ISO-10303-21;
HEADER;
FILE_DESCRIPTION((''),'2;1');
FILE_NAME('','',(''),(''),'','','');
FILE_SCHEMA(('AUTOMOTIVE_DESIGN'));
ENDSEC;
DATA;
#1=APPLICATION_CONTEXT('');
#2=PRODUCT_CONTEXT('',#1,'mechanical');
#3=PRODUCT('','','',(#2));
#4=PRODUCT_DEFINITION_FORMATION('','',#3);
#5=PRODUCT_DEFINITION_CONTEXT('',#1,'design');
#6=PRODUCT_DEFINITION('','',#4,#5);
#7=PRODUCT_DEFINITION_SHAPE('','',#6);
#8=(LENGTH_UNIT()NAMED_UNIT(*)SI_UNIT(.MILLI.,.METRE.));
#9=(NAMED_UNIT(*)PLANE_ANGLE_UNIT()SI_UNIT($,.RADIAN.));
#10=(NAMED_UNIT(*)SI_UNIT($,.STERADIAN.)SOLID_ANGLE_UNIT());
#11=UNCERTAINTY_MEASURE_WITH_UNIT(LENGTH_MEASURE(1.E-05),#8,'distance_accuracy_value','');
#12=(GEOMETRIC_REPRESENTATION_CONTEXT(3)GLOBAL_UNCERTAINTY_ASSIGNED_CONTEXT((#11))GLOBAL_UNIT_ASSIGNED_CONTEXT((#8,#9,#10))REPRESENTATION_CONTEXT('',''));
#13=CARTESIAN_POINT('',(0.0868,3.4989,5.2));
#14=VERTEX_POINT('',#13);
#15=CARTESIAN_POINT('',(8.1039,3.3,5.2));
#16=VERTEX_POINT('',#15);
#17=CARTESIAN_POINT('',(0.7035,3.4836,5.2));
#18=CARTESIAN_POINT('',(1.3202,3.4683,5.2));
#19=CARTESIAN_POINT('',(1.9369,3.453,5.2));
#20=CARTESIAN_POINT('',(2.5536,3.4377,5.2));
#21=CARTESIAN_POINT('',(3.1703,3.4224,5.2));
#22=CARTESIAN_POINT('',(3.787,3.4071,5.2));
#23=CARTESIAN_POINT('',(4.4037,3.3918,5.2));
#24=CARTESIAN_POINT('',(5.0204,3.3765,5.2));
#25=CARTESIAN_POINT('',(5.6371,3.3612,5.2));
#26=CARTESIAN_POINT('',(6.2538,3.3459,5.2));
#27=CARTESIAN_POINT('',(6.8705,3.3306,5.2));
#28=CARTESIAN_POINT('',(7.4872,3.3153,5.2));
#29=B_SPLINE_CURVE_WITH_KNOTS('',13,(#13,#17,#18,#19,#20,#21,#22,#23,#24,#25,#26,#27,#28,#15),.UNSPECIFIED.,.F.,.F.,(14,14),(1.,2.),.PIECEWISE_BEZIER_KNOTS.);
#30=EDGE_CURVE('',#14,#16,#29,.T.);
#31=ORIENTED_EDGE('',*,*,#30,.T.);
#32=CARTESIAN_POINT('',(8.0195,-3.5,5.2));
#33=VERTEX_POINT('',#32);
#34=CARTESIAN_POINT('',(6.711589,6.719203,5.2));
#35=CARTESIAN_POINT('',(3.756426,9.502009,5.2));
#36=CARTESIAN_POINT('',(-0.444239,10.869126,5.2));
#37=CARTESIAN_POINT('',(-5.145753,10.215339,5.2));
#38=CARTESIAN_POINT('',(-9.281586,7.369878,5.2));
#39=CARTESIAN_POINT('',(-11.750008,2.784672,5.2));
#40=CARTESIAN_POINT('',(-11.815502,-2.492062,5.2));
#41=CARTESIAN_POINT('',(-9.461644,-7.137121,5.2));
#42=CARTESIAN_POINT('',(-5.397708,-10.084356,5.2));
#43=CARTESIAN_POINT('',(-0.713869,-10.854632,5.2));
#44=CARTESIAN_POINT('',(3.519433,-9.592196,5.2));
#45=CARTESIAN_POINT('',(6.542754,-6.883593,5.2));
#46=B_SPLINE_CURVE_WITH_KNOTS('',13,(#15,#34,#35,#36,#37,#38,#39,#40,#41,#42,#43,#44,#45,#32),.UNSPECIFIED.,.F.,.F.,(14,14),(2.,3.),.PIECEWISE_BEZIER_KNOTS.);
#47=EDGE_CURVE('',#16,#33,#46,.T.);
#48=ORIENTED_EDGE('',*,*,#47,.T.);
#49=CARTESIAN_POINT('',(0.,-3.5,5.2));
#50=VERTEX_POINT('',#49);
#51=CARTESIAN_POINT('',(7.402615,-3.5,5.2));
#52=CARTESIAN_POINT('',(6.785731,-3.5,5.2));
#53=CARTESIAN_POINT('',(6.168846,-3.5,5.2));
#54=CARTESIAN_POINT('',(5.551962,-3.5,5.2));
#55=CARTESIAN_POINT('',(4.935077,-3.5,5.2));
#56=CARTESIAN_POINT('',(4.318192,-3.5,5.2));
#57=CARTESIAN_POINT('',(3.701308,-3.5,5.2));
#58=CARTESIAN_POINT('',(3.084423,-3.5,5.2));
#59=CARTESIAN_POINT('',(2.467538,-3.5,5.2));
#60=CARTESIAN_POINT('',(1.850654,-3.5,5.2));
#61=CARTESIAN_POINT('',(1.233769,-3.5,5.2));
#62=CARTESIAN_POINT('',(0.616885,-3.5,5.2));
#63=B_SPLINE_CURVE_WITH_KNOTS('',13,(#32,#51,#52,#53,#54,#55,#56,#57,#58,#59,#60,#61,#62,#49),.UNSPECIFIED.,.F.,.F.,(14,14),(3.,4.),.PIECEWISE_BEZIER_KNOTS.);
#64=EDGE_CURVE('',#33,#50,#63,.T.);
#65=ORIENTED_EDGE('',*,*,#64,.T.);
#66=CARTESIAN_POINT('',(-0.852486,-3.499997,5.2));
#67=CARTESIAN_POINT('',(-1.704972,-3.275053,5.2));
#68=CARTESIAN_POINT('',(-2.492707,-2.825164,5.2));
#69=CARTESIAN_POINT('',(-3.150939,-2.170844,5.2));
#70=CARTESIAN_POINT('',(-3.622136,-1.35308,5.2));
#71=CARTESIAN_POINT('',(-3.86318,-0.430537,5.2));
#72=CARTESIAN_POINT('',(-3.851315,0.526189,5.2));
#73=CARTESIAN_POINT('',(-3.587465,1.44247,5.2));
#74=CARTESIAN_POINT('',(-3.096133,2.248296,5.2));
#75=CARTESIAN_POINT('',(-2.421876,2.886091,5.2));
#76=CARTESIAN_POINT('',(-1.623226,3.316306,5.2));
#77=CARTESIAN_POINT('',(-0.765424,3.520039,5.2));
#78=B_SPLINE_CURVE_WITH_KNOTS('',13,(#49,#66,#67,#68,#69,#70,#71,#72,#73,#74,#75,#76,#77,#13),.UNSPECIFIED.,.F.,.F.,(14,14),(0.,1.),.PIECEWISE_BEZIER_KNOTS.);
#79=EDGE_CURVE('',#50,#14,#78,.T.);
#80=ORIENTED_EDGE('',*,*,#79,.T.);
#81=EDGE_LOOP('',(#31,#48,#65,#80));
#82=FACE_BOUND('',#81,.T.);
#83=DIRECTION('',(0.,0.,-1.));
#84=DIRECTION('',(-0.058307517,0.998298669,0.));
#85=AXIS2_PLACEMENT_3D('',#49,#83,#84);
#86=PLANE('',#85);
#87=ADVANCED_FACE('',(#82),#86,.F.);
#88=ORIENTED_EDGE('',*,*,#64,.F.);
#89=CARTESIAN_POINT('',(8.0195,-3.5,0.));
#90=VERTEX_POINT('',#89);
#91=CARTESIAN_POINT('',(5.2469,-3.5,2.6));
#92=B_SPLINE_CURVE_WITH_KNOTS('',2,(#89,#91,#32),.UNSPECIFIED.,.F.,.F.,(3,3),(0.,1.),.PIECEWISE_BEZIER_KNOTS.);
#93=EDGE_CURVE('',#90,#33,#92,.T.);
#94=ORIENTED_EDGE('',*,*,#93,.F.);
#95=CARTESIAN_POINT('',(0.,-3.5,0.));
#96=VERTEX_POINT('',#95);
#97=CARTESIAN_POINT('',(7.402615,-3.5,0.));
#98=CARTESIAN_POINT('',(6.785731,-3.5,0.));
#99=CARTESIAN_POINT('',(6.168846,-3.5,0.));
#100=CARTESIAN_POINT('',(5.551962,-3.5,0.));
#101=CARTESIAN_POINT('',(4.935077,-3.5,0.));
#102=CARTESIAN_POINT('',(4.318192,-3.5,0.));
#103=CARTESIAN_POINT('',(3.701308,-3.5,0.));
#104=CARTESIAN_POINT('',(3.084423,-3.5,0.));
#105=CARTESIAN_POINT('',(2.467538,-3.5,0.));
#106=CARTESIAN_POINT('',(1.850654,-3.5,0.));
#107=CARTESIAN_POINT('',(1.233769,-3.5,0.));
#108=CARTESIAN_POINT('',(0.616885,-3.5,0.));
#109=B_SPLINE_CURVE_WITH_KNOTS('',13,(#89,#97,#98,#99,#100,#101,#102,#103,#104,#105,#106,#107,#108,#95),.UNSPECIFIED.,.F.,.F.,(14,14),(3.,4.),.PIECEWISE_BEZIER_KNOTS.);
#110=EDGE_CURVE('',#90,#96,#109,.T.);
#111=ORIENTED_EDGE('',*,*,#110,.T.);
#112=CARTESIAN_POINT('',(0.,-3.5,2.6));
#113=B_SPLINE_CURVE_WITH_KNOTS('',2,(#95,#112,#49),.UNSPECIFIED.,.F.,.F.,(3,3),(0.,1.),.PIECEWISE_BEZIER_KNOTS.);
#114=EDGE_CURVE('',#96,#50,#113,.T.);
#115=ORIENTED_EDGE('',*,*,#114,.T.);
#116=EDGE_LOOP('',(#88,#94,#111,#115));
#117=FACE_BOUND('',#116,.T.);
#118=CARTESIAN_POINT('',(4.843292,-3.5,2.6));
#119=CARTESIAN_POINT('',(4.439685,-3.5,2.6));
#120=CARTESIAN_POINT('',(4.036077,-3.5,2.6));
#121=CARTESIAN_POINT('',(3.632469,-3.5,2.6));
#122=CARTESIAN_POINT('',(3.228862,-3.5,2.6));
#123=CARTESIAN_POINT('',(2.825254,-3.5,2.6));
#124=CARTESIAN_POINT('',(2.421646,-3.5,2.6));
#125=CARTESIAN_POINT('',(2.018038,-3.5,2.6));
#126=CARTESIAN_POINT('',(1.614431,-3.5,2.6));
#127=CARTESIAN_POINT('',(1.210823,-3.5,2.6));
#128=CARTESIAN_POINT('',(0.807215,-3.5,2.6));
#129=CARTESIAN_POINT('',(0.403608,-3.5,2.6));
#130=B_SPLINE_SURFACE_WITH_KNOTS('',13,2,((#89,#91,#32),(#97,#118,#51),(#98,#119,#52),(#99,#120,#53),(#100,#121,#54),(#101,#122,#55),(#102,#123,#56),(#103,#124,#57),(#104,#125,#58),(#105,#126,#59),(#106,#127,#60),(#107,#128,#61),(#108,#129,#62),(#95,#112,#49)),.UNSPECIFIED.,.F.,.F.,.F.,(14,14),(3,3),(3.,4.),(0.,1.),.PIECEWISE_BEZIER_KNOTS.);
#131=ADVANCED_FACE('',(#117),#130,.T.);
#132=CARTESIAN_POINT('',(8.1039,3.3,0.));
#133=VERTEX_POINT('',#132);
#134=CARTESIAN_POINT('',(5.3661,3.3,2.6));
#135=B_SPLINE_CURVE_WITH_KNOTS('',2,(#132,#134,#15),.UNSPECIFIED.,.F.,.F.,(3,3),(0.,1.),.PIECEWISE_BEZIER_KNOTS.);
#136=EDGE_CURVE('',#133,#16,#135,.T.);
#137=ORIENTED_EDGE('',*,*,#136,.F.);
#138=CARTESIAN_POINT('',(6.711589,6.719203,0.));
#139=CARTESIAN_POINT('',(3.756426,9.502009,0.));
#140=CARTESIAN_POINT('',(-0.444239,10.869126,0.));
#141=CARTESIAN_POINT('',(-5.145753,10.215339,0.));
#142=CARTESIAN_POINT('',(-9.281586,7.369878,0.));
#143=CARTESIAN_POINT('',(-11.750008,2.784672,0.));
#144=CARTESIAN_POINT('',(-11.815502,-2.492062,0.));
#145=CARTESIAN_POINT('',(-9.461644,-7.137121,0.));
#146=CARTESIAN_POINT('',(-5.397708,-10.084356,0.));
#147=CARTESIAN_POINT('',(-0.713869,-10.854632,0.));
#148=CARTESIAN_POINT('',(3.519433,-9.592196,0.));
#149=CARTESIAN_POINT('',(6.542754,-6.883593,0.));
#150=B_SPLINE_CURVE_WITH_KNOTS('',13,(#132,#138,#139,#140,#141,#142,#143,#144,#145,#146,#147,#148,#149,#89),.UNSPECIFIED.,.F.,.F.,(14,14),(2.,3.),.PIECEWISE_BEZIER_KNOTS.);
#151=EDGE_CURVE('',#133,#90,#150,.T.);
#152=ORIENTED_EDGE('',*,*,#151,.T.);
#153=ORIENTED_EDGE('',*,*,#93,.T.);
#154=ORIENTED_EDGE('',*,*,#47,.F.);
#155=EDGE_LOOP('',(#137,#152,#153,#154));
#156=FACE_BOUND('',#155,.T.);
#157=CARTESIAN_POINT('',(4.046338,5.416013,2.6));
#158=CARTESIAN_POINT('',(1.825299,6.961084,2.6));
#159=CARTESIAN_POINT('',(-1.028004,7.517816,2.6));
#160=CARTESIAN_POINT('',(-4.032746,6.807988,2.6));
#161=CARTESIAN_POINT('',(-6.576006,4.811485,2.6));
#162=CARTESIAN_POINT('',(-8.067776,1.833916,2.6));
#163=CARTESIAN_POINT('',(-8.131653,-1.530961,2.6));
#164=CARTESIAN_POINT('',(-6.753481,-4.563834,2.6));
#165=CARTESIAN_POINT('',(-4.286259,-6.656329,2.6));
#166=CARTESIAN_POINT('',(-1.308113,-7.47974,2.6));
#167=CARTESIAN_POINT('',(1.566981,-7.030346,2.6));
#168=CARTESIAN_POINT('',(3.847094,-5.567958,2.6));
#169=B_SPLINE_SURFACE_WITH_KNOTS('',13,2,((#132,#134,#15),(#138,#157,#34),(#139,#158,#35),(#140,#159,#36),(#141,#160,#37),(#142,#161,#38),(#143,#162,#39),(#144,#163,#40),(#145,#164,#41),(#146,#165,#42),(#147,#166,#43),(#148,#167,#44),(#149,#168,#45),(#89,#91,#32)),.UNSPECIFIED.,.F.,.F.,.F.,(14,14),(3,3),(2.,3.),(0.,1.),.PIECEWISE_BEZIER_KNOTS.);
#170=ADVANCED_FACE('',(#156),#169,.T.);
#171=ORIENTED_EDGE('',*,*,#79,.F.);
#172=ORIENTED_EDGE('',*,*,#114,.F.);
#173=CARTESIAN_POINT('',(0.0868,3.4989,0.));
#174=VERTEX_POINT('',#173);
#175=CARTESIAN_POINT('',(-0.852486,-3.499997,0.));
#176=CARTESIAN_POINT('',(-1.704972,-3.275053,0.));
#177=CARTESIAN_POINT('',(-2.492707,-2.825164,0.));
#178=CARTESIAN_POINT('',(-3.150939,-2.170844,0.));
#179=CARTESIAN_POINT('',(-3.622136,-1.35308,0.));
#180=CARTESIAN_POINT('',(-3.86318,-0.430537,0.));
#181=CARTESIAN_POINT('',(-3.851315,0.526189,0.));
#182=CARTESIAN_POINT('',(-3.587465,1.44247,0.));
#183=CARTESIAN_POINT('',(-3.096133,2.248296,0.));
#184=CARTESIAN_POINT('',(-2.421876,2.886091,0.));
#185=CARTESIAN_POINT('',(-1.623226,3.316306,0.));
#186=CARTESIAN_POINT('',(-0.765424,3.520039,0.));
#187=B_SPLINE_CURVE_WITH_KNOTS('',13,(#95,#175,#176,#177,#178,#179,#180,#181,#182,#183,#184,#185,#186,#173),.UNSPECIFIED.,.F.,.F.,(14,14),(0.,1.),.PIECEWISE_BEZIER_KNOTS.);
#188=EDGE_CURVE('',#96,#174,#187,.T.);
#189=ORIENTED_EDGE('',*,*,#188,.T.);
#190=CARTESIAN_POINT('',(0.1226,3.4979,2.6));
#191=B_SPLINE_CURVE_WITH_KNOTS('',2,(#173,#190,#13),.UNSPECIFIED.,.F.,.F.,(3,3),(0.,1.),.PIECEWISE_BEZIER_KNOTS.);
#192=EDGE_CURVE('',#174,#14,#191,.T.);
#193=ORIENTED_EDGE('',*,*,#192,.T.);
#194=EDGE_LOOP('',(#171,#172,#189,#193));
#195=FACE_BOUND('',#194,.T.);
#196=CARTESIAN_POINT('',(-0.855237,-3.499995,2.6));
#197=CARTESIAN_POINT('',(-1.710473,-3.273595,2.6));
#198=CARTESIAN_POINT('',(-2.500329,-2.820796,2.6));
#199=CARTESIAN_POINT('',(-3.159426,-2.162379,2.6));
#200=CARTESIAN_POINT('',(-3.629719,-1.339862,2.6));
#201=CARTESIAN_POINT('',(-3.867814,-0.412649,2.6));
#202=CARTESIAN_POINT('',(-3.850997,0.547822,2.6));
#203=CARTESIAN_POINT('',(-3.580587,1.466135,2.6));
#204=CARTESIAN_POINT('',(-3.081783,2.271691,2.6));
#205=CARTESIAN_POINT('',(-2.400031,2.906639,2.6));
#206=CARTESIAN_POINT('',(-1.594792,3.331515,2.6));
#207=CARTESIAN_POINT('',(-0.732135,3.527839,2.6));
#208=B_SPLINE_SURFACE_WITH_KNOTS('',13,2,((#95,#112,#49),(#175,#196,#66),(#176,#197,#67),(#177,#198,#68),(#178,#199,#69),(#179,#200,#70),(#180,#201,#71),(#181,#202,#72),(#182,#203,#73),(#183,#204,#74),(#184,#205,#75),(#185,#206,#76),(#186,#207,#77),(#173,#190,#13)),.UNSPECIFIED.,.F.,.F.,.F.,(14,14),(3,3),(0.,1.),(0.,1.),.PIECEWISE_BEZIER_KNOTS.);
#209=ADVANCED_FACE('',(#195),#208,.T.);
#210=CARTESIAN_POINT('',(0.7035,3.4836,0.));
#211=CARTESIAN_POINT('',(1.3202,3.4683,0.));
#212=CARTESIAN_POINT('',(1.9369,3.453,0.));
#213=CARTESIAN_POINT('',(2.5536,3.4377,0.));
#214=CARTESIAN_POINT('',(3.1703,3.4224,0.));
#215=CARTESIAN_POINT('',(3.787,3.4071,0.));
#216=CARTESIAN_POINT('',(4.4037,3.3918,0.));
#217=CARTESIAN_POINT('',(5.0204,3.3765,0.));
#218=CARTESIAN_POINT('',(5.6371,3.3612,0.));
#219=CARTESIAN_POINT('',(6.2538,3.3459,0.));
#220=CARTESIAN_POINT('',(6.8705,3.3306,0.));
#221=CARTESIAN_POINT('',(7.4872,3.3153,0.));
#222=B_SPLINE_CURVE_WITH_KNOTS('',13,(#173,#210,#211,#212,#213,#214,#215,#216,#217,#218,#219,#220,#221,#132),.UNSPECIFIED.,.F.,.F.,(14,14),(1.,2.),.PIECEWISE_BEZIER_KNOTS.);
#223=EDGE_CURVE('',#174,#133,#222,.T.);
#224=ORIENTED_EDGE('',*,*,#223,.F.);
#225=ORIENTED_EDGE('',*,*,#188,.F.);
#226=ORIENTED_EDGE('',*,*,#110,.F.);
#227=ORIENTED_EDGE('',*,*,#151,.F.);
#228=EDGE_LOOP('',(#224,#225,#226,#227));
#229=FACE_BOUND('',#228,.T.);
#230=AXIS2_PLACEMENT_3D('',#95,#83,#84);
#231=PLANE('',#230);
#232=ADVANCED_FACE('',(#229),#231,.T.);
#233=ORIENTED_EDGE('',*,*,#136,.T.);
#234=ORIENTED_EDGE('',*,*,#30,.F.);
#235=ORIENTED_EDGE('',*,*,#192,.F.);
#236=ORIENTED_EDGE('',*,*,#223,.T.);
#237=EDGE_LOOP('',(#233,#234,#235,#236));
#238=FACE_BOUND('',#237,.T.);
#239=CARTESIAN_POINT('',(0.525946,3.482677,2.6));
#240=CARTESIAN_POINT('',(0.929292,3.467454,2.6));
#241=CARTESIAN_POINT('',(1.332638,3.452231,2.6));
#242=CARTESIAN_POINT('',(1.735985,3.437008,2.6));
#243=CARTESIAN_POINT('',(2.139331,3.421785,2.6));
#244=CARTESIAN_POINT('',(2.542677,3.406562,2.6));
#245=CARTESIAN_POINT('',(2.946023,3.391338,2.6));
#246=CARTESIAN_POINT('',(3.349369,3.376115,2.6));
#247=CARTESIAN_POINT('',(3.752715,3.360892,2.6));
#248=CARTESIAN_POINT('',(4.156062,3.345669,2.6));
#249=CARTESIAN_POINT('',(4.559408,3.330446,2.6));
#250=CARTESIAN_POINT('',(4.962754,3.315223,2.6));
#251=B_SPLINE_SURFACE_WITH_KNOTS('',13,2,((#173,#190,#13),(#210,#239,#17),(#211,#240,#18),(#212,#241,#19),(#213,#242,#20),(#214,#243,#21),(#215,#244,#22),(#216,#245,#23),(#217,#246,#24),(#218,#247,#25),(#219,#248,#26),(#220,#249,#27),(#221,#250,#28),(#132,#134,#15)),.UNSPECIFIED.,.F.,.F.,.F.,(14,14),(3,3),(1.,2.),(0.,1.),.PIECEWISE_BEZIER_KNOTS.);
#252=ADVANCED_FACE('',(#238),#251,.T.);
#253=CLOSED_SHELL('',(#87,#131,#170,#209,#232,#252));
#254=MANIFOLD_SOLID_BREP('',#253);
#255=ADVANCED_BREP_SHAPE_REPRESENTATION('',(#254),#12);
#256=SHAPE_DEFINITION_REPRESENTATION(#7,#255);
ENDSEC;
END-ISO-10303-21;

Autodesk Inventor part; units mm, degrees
ref_plane "YZ Plane" through (0, 0, 0) normal (1, 0, 0) x (0, 1, 0)
ref_plane "XZ Plane" through (0, 0, 0) normal (0, 1, 0) x (-1, 0, 0)
sketch "Sketch1" plane through (0, 0, 0) normal (0, 0, 1) x (1, 0, 0)
  arc A0 (0.0868, 3.4989) -> (0, -3.5) centre (0, 0) ccw
  arc A1 (8.1039, 3.3) -> (8.0195, -3.5) centre (0, 0) ccw
  line L0 (0.0868, 3.4989) -> (8.1039, 3.3)
  line L1 (0, -3.5) -> (8.0195, -3.5)
  dimension "d0" = 7
  dimension "d1" = 17.5
  dimension "d2" = 3.3
ref_plane "Work Plane1" through (0, 0, 2.6) normal (0, 0, 1) x (1, 0, 0)
sketch "Sketch2" plane through (0, 0, 2.6) normal (0, 0, 1) x (1, 0, 0)
  arc A0 (6.735, 3.3) -> (6.6332, -3.5) centre (0, 0) ccw
  arc A1 (0.1047, 3.4984) -> (0, -3.5) centre (0, 0) ccw
  line L0 (0.1047, 3.4984) -> (6.735, 3.3)
  line L1 (0, -3.5) -> (6.6332, -3.5)
  dimension "d4" = 15
  dimension "d5" = 7
  dimension "d6" = 3.3
ref_plane "Work Plane2" through (0, 0, 5.2) normal (0, 0, 1) x (1, 0, 0)
sketch "Sketch3" plane through (0, 0, 5.2) normal (0, 0, 1) x (1, 0, 0)
  arc A0 (8.1039, 3.3) -> (8.0195, -3.5) centre (0, 0) ccw
  arc A1 (0.0868, 3.4989) -> (0, -3.5) centre (0, 0) ccw
  line L0 (0.0868, 3.4989) -> (8.1039, 3.3)
  line L1 (0, -3.5) -> (8.0195, -3.5)
  dimension "d8" = 17.5
  dimension "d9" = 7
  dimension "d10" = 3.3
loft "Loft1" add profiles "Sketch1", "Sketch2", "Sketch3"
properties part number "sg90_shaft_support"
